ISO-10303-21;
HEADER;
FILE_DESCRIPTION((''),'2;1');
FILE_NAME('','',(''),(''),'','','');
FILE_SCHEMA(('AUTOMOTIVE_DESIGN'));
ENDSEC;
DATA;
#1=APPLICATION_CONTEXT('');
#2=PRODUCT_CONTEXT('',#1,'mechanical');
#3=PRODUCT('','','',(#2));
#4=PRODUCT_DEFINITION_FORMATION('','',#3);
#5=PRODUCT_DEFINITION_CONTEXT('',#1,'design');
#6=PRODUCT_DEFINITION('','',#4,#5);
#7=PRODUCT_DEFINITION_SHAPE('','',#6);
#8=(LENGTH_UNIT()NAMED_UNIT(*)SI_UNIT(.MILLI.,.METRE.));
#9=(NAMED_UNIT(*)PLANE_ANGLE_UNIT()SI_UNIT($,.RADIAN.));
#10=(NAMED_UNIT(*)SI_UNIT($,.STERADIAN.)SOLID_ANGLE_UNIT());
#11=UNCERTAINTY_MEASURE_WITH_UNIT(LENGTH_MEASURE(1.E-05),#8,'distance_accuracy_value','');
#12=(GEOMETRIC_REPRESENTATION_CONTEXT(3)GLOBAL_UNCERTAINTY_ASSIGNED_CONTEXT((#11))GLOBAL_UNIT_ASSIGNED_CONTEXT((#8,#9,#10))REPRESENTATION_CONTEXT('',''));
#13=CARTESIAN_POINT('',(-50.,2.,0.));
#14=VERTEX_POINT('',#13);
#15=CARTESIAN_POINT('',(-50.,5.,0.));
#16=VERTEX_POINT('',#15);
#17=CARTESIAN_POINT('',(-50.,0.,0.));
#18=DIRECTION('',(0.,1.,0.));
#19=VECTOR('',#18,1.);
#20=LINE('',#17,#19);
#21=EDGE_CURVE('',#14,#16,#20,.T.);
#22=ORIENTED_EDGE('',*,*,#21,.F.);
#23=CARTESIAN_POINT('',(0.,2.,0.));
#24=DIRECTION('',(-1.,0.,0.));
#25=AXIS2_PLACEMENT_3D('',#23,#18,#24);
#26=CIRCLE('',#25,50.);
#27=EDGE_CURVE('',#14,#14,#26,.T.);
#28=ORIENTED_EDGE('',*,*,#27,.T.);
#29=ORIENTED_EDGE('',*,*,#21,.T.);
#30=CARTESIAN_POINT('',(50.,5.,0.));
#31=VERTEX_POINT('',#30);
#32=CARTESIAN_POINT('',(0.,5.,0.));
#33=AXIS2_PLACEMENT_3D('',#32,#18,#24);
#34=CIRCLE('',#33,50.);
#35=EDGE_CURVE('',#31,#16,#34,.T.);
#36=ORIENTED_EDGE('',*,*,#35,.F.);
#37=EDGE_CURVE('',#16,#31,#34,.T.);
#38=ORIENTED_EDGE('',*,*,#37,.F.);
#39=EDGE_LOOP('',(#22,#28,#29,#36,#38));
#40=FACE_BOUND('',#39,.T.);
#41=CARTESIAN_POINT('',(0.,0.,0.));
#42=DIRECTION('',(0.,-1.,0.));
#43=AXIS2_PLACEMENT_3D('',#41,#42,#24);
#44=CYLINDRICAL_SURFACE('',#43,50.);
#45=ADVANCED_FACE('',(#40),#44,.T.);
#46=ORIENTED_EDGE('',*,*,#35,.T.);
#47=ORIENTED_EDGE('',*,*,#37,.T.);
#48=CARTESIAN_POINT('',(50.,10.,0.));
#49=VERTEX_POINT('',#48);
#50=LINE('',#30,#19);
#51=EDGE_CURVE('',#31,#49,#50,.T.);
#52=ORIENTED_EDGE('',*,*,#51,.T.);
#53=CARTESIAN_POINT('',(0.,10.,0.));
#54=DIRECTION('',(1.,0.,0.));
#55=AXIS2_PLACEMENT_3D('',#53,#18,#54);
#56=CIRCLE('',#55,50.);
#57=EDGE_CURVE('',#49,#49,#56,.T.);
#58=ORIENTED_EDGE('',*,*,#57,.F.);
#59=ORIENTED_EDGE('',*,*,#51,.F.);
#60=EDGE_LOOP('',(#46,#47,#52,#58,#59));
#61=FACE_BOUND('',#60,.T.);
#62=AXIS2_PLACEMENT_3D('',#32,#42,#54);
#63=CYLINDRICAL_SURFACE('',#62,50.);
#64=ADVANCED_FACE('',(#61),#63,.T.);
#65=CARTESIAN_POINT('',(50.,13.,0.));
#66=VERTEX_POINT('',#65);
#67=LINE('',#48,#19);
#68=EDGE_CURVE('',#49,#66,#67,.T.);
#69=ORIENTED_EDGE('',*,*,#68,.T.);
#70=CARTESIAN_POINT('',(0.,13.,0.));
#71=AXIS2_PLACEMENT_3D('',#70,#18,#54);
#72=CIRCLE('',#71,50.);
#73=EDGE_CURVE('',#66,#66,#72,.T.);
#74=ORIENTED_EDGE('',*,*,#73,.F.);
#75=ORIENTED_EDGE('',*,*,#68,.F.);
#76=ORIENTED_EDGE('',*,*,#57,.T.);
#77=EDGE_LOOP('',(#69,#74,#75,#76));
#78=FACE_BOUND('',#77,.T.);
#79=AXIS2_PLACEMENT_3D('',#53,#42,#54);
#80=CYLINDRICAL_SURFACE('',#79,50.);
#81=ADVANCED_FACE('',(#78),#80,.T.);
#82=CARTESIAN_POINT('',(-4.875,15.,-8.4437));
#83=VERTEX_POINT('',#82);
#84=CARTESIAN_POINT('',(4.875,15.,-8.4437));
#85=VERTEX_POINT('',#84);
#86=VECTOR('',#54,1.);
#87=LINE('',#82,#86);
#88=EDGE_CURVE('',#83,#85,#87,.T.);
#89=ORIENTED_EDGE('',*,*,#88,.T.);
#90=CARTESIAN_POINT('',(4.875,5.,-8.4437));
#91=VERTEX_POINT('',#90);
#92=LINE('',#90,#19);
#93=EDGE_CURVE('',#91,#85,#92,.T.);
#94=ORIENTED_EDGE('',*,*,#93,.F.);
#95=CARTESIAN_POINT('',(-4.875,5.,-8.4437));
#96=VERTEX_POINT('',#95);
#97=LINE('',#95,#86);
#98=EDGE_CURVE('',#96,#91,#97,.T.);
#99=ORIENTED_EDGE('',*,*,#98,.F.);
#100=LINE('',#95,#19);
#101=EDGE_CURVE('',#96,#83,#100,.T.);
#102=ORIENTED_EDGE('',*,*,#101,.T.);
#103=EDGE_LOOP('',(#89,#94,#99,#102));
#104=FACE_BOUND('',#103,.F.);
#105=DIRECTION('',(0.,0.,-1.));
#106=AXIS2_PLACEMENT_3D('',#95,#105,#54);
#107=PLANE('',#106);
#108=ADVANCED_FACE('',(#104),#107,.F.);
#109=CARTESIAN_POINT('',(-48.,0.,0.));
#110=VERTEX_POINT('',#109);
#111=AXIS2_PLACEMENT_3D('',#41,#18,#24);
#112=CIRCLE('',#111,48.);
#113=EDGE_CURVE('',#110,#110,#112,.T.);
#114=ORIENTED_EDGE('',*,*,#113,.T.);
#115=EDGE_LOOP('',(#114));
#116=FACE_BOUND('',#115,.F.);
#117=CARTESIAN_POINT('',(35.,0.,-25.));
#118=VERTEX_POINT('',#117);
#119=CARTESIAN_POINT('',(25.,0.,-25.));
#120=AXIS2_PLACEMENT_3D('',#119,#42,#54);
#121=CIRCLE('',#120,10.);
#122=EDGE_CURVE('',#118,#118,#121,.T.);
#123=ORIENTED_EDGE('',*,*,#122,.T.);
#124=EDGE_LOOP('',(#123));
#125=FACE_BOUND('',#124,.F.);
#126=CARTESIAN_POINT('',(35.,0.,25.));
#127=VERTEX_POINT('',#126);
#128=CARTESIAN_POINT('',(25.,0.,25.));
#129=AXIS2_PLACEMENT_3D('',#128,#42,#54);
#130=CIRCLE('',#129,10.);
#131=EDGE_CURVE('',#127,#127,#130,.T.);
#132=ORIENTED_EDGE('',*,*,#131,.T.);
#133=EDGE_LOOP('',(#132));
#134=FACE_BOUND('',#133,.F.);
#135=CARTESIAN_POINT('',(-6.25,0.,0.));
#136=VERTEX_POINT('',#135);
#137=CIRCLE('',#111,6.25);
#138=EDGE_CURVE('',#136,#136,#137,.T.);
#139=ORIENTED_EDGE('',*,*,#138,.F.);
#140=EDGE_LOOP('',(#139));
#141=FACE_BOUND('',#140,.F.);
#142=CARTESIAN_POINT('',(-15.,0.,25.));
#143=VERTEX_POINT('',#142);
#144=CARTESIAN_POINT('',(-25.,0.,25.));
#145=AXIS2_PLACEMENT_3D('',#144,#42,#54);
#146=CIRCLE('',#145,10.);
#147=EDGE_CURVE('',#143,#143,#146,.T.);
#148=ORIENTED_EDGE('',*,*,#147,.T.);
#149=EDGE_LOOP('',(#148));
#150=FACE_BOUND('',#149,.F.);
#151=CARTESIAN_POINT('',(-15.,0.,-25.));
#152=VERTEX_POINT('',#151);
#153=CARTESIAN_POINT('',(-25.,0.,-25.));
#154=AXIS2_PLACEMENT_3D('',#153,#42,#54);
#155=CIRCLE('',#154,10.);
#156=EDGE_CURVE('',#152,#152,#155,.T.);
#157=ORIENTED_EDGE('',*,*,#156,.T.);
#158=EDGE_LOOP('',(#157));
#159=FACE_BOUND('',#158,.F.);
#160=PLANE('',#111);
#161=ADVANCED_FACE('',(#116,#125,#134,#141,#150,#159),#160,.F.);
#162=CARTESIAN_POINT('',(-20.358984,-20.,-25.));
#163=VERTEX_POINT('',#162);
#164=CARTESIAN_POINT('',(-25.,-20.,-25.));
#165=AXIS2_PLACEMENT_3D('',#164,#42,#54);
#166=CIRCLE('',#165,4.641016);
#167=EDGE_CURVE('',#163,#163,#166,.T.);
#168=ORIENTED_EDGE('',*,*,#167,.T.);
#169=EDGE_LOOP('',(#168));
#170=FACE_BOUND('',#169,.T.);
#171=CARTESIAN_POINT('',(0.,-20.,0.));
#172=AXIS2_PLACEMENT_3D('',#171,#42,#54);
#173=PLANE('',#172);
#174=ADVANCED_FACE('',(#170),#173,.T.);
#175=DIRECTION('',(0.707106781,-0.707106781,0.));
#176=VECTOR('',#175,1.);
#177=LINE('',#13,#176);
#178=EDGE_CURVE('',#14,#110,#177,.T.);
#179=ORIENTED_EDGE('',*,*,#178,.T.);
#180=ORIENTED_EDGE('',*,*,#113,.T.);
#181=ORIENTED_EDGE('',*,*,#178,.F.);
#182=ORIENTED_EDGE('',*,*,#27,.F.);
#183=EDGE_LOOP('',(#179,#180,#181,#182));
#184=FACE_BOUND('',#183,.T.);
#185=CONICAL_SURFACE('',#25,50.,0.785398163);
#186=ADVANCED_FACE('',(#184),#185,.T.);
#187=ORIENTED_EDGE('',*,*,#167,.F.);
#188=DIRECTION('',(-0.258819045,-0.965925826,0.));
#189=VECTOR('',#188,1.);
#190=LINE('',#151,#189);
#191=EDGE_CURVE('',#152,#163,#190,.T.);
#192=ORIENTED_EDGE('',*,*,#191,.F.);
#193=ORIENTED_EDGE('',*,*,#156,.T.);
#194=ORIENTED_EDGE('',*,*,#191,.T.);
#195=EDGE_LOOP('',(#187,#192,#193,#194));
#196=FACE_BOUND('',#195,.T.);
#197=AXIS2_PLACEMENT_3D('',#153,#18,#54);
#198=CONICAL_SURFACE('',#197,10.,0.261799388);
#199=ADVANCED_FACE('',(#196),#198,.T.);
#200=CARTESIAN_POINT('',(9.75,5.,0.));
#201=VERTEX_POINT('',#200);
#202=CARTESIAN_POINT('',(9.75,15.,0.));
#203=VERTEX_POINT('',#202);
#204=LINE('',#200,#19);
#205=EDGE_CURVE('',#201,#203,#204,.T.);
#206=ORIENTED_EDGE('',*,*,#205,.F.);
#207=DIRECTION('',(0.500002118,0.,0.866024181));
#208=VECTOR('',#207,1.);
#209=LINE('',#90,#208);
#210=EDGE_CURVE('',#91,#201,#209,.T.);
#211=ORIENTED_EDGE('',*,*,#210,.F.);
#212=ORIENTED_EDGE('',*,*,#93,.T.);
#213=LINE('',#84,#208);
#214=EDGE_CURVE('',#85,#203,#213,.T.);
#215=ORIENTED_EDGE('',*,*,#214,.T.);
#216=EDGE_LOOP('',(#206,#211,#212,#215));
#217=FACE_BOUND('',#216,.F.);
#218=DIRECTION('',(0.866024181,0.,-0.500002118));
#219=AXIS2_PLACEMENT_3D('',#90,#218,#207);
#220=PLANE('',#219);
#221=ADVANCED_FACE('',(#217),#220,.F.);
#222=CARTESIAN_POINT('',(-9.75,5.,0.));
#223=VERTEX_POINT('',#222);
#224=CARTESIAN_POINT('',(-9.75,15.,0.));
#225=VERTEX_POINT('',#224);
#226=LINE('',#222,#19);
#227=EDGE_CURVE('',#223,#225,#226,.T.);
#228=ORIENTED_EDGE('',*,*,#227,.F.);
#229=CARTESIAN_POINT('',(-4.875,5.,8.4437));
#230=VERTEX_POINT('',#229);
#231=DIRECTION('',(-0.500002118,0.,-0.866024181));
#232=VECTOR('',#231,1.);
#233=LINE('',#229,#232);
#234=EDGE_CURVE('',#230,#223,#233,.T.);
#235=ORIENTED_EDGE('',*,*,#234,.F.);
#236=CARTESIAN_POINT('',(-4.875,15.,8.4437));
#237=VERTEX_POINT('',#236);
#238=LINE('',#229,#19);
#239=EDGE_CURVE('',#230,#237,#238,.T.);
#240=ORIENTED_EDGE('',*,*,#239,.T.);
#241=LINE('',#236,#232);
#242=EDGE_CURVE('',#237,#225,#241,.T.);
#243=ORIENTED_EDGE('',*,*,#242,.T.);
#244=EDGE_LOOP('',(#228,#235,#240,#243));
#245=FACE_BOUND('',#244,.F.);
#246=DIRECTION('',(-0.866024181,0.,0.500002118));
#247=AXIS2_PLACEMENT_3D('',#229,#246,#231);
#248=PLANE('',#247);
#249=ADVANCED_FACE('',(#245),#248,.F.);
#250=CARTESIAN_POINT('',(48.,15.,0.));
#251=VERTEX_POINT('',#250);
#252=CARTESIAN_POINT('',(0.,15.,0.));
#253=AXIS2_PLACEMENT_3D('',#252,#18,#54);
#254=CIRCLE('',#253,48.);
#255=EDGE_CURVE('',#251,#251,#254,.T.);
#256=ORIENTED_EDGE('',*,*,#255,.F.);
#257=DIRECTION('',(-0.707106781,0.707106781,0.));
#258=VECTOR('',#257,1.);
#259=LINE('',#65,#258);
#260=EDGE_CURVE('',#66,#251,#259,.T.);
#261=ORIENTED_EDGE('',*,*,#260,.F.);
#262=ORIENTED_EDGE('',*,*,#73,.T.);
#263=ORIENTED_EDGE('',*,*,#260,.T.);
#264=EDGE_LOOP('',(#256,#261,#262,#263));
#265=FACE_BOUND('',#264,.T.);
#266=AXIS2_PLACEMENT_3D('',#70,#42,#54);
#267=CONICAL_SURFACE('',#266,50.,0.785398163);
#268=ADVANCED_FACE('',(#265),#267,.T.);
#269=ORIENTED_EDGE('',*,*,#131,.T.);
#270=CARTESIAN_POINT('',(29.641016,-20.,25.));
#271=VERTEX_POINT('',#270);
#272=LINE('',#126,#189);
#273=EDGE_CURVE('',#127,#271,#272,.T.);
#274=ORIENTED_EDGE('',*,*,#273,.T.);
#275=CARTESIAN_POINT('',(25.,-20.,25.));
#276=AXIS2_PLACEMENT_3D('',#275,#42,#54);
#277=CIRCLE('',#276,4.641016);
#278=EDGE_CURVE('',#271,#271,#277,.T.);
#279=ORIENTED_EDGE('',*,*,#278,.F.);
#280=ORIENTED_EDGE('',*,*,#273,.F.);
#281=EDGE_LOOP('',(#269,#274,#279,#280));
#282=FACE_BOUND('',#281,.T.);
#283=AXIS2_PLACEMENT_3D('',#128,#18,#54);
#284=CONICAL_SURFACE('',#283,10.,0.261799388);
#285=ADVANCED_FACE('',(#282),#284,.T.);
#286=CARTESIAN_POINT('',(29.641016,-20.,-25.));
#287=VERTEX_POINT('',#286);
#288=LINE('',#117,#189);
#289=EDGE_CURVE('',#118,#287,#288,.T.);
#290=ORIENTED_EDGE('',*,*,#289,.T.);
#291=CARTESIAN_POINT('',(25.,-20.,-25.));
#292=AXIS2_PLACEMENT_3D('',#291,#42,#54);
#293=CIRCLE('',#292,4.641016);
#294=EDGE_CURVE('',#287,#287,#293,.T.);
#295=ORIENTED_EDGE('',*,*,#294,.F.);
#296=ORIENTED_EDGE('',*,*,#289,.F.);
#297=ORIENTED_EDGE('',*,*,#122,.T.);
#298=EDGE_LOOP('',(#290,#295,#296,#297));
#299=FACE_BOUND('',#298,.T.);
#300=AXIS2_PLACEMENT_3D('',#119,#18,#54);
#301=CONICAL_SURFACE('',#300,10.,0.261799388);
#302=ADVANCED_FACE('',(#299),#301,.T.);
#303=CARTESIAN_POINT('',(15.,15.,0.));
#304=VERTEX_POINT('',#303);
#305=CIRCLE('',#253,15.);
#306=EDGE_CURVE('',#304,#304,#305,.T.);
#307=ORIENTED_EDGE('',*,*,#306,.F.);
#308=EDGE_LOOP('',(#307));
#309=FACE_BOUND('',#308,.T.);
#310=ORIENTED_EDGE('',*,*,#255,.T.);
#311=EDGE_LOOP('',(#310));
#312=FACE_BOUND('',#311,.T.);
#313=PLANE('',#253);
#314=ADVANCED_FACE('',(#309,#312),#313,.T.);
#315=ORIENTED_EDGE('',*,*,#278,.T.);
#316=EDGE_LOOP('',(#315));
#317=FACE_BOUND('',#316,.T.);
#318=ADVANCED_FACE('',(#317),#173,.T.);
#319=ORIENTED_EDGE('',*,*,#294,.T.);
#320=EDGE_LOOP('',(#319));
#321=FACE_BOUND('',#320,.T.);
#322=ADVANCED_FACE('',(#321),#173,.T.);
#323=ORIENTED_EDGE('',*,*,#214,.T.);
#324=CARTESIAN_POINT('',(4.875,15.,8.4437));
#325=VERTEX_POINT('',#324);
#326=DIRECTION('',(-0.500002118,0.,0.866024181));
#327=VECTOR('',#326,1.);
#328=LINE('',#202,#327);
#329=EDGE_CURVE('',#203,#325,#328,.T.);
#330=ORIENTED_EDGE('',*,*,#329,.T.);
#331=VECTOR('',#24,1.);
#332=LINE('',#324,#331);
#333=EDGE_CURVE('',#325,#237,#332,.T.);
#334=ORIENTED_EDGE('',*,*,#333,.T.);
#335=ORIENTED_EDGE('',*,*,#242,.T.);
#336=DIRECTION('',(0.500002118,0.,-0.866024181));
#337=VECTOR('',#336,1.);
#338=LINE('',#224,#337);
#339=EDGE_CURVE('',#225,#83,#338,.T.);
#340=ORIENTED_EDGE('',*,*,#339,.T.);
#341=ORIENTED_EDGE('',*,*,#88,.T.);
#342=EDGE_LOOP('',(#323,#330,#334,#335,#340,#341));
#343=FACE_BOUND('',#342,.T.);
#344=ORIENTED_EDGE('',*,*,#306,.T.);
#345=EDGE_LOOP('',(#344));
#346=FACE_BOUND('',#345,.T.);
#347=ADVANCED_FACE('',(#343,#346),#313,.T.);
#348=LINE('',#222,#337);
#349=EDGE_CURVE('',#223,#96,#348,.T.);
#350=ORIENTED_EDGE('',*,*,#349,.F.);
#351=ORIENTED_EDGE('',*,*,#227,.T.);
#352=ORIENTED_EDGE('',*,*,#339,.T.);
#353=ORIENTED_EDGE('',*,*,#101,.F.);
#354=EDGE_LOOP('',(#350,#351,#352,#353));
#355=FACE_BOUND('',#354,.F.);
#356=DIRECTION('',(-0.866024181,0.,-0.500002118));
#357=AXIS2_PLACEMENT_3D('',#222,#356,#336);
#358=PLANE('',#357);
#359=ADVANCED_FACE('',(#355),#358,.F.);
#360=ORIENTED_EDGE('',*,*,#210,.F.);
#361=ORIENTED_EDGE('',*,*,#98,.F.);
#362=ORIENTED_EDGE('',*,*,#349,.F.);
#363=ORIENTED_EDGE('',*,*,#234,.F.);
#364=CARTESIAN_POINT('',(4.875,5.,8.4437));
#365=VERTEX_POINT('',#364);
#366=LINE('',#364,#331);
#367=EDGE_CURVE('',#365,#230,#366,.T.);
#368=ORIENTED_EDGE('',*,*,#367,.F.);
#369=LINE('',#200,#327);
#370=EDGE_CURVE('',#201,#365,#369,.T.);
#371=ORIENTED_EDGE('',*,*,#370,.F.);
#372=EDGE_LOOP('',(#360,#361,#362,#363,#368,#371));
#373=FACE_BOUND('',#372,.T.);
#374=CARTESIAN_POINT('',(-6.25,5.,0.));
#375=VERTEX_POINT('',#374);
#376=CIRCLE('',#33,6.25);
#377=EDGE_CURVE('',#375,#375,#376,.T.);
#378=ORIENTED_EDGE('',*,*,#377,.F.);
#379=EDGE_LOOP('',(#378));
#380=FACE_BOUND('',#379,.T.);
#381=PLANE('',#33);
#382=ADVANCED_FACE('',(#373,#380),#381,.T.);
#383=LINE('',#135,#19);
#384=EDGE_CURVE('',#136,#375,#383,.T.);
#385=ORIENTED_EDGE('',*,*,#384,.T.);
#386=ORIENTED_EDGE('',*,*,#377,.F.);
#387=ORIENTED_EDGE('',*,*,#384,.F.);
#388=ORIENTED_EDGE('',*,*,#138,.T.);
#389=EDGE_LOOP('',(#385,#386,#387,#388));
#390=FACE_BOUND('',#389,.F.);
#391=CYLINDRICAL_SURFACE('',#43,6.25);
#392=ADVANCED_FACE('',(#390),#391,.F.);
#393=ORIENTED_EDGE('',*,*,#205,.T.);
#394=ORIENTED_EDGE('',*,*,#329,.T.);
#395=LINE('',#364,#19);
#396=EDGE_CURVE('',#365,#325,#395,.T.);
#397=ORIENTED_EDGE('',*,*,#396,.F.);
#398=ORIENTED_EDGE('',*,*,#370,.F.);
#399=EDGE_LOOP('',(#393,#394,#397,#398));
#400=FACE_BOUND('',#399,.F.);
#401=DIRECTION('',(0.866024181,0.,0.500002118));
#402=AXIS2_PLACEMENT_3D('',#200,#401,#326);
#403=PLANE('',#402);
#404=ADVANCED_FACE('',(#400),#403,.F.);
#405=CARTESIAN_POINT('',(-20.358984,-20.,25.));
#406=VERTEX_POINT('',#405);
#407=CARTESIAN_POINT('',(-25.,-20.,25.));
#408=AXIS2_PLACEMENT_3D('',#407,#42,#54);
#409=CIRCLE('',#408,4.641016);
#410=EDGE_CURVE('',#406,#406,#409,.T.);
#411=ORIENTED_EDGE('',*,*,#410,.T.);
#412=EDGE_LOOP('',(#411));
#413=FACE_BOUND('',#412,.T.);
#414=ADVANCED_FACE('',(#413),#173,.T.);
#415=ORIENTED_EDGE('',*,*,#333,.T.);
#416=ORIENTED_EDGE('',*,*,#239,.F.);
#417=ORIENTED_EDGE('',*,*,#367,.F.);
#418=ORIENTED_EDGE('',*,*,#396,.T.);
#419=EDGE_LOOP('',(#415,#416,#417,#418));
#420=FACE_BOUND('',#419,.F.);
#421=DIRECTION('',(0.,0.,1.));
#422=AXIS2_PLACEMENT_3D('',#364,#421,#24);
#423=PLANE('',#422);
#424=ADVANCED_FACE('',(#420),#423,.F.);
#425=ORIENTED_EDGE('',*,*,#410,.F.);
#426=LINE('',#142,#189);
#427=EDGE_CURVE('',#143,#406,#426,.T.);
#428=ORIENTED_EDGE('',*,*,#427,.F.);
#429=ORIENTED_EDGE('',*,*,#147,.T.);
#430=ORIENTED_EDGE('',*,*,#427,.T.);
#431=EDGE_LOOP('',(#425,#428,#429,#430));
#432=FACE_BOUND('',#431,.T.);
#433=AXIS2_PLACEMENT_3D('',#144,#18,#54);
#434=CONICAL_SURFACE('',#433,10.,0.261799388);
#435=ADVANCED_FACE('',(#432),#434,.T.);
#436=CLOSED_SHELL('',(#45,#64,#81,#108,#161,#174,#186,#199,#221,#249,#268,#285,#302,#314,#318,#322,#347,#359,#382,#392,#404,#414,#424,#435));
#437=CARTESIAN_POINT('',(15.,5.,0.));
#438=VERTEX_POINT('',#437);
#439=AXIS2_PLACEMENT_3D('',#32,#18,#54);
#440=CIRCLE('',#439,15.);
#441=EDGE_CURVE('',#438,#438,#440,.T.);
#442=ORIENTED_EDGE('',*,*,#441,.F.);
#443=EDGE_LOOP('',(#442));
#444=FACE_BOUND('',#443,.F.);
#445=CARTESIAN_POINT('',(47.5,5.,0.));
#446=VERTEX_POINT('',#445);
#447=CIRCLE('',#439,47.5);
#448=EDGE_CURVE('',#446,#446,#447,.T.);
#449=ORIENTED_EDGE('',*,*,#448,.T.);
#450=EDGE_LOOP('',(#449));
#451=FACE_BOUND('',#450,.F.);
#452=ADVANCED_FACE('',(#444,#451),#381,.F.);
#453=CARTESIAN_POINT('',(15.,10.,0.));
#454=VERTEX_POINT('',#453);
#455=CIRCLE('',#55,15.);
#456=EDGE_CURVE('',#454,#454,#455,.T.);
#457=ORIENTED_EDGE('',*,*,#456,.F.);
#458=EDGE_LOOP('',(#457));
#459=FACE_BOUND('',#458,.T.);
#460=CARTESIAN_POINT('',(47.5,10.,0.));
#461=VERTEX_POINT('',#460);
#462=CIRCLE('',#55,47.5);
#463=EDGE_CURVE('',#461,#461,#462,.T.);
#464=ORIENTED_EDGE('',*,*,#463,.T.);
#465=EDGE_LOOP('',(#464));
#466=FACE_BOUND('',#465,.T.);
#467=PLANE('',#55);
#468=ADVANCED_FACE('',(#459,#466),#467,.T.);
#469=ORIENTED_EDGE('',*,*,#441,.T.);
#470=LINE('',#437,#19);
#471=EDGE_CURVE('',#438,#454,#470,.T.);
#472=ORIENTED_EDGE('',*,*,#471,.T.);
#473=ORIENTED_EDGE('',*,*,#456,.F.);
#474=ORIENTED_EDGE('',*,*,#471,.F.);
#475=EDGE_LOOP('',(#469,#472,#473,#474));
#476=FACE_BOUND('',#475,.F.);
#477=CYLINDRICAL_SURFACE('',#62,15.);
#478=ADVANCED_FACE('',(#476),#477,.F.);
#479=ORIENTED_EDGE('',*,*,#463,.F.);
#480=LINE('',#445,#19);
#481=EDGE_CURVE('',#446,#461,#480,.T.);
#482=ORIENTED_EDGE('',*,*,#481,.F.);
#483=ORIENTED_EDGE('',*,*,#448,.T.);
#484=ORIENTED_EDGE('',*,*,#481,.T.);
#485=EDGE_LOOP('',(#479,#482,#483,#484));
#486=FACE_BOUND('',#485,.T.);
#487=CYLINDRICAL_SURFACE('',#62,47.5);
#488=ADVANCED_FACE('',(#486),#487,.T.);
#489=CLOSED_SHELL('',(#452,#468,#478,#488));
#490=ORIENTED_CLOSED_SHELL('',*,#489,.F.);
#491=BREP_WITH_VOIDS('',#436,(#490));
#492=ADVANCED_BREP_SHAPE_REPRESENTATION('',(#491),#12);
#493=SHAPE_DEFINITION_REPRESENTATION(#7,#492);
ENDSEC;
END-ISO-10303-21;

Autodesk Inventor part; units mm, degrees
ref_plane "YZ Plane" through (0, 0, 0) normal (1, 0, 0) x (0, 1, 0)
ref_plane "XZ Plane" through (0, 0, 0) normal (0, 1, 0) x (-1, 0, 0)
ref_plane "XY Plane" through (0, 0, 0) normal (0, 0, 1) x (1, 0, 0)
sketch "Sketch1" plane through (0, 0, 0) normal (0, 1, 0) x (-1, 0, 0)
  circle A0 centre (0, 0) radius 50
  circle A1 centre (0, 0) radius 6.25
  dimension "d0" = 100
  dimension "d1" = 12.5
extrude "Extrusion1" add sketch "Sketch1" along normal blind 5
sketch "Sketch2" plane through (0, 5, 0) normal (0, 1, 0) x (1, 0, 0)
  line L0 (9.75, 0) -> (4.875, -8.4437)
  line L1 (4.875, -8.4437) -> (-4.875, -8.4437)
  line L2 (-4.875, -8.4437) -> (-9.75, 0)
  line L3 (-9.75, 0) -> (-4.875, 8.4437)
  line L4 (-4.875, 8.4437) -> (4.875, 8.4437)
  line L5 (4.875, 8.4437) -> (9.75, 0)
  line L6 (0, 0) -> (0, 50) construction
  circle A0 centre (0, 0) radius 50 construction
  line L7 (0, 0) -> (-50, 0) construction
  circle A1 centre (0, 0) radius 15
  dimension "d4" = 19.5
  dimension "d5" = 30
extrude "Extrusion2" add sketch "Sketch2" along normal blind 10
sketch "Sketch3" plane through (0, 5, 0) normal (0, 1, 0) x (1, 0, 0)
  circle A0 centre (0, 0) radius 50
  circle A1 centre (0, 0) radius 47.5
  dimension "d8" = 95
extrude "Extrusion3" add sketch "Sketch3" along normal blind 5
sketch "Sketch4" plane through (0, 10, 0) normal (0, 1, 0) x (1, 0, 0)
  circle A0 centre (0, 0) radius 15
  circle A1 centre (0, 0) radius 50
extrude "Extrusion4" add sketch "Sketch4" along normal blind 5
sketch "Sketch5" plane through (0, 0, 0) normal (0, -1, 0) x (1, 0, 0)
  circle A0 centre (0, 0) radius 6.25 construction
  line L0 (0, 0) -> (0, -50) construction
  circle A1 centre (0, 0) radius 50 construction
  line L1 (0, 0) -> (50, 0) construction
  circle A2 centre (25, -25) radius 10
  circle A3 centre (-25, -25) radius 10
  circle A4 centre (25, 25) radius 10
  circle A5 centre (-25, 25) radius 10
  dimension "d13" = 20
  dimension "d14" = 25
  dimension "d15" = 25
extrude "Extrusion5" add sketch "Sketch5" along normal blind 20
draft "FaceDraft1" angle 15 pull direction (0, -1, 0) faces at (34.8705, -13.3333, -26.6041) fixed edges at (15, 0, -25)
draft "FaceDraft3" angle 15 pull direction (0, -1, 0) faces at (-15.1295, -13.3333, -26.6041) fixed edges at (-35, 0, -25)
draft "FaceDraft4" angle 15 pull direction (0, -1, 0) faces at (34.8705, -13.3333, 23.3959) fixed edges at (15, 0, 25)
draft "FaceDraft5" angle 15 pull direction (0, -1, 0) faces at (-15.1295, -13.3333, 23.3959) fixed edges at (-35, 0, 25)
chamfer "Chamfer1" distance 2 angle 45 1 edges at (-50, 15, 0)
chamfer "Chamfer2" distance 2 angle 45 1 edges at (50, 0, 0)
properties part number "ground_support_2"
